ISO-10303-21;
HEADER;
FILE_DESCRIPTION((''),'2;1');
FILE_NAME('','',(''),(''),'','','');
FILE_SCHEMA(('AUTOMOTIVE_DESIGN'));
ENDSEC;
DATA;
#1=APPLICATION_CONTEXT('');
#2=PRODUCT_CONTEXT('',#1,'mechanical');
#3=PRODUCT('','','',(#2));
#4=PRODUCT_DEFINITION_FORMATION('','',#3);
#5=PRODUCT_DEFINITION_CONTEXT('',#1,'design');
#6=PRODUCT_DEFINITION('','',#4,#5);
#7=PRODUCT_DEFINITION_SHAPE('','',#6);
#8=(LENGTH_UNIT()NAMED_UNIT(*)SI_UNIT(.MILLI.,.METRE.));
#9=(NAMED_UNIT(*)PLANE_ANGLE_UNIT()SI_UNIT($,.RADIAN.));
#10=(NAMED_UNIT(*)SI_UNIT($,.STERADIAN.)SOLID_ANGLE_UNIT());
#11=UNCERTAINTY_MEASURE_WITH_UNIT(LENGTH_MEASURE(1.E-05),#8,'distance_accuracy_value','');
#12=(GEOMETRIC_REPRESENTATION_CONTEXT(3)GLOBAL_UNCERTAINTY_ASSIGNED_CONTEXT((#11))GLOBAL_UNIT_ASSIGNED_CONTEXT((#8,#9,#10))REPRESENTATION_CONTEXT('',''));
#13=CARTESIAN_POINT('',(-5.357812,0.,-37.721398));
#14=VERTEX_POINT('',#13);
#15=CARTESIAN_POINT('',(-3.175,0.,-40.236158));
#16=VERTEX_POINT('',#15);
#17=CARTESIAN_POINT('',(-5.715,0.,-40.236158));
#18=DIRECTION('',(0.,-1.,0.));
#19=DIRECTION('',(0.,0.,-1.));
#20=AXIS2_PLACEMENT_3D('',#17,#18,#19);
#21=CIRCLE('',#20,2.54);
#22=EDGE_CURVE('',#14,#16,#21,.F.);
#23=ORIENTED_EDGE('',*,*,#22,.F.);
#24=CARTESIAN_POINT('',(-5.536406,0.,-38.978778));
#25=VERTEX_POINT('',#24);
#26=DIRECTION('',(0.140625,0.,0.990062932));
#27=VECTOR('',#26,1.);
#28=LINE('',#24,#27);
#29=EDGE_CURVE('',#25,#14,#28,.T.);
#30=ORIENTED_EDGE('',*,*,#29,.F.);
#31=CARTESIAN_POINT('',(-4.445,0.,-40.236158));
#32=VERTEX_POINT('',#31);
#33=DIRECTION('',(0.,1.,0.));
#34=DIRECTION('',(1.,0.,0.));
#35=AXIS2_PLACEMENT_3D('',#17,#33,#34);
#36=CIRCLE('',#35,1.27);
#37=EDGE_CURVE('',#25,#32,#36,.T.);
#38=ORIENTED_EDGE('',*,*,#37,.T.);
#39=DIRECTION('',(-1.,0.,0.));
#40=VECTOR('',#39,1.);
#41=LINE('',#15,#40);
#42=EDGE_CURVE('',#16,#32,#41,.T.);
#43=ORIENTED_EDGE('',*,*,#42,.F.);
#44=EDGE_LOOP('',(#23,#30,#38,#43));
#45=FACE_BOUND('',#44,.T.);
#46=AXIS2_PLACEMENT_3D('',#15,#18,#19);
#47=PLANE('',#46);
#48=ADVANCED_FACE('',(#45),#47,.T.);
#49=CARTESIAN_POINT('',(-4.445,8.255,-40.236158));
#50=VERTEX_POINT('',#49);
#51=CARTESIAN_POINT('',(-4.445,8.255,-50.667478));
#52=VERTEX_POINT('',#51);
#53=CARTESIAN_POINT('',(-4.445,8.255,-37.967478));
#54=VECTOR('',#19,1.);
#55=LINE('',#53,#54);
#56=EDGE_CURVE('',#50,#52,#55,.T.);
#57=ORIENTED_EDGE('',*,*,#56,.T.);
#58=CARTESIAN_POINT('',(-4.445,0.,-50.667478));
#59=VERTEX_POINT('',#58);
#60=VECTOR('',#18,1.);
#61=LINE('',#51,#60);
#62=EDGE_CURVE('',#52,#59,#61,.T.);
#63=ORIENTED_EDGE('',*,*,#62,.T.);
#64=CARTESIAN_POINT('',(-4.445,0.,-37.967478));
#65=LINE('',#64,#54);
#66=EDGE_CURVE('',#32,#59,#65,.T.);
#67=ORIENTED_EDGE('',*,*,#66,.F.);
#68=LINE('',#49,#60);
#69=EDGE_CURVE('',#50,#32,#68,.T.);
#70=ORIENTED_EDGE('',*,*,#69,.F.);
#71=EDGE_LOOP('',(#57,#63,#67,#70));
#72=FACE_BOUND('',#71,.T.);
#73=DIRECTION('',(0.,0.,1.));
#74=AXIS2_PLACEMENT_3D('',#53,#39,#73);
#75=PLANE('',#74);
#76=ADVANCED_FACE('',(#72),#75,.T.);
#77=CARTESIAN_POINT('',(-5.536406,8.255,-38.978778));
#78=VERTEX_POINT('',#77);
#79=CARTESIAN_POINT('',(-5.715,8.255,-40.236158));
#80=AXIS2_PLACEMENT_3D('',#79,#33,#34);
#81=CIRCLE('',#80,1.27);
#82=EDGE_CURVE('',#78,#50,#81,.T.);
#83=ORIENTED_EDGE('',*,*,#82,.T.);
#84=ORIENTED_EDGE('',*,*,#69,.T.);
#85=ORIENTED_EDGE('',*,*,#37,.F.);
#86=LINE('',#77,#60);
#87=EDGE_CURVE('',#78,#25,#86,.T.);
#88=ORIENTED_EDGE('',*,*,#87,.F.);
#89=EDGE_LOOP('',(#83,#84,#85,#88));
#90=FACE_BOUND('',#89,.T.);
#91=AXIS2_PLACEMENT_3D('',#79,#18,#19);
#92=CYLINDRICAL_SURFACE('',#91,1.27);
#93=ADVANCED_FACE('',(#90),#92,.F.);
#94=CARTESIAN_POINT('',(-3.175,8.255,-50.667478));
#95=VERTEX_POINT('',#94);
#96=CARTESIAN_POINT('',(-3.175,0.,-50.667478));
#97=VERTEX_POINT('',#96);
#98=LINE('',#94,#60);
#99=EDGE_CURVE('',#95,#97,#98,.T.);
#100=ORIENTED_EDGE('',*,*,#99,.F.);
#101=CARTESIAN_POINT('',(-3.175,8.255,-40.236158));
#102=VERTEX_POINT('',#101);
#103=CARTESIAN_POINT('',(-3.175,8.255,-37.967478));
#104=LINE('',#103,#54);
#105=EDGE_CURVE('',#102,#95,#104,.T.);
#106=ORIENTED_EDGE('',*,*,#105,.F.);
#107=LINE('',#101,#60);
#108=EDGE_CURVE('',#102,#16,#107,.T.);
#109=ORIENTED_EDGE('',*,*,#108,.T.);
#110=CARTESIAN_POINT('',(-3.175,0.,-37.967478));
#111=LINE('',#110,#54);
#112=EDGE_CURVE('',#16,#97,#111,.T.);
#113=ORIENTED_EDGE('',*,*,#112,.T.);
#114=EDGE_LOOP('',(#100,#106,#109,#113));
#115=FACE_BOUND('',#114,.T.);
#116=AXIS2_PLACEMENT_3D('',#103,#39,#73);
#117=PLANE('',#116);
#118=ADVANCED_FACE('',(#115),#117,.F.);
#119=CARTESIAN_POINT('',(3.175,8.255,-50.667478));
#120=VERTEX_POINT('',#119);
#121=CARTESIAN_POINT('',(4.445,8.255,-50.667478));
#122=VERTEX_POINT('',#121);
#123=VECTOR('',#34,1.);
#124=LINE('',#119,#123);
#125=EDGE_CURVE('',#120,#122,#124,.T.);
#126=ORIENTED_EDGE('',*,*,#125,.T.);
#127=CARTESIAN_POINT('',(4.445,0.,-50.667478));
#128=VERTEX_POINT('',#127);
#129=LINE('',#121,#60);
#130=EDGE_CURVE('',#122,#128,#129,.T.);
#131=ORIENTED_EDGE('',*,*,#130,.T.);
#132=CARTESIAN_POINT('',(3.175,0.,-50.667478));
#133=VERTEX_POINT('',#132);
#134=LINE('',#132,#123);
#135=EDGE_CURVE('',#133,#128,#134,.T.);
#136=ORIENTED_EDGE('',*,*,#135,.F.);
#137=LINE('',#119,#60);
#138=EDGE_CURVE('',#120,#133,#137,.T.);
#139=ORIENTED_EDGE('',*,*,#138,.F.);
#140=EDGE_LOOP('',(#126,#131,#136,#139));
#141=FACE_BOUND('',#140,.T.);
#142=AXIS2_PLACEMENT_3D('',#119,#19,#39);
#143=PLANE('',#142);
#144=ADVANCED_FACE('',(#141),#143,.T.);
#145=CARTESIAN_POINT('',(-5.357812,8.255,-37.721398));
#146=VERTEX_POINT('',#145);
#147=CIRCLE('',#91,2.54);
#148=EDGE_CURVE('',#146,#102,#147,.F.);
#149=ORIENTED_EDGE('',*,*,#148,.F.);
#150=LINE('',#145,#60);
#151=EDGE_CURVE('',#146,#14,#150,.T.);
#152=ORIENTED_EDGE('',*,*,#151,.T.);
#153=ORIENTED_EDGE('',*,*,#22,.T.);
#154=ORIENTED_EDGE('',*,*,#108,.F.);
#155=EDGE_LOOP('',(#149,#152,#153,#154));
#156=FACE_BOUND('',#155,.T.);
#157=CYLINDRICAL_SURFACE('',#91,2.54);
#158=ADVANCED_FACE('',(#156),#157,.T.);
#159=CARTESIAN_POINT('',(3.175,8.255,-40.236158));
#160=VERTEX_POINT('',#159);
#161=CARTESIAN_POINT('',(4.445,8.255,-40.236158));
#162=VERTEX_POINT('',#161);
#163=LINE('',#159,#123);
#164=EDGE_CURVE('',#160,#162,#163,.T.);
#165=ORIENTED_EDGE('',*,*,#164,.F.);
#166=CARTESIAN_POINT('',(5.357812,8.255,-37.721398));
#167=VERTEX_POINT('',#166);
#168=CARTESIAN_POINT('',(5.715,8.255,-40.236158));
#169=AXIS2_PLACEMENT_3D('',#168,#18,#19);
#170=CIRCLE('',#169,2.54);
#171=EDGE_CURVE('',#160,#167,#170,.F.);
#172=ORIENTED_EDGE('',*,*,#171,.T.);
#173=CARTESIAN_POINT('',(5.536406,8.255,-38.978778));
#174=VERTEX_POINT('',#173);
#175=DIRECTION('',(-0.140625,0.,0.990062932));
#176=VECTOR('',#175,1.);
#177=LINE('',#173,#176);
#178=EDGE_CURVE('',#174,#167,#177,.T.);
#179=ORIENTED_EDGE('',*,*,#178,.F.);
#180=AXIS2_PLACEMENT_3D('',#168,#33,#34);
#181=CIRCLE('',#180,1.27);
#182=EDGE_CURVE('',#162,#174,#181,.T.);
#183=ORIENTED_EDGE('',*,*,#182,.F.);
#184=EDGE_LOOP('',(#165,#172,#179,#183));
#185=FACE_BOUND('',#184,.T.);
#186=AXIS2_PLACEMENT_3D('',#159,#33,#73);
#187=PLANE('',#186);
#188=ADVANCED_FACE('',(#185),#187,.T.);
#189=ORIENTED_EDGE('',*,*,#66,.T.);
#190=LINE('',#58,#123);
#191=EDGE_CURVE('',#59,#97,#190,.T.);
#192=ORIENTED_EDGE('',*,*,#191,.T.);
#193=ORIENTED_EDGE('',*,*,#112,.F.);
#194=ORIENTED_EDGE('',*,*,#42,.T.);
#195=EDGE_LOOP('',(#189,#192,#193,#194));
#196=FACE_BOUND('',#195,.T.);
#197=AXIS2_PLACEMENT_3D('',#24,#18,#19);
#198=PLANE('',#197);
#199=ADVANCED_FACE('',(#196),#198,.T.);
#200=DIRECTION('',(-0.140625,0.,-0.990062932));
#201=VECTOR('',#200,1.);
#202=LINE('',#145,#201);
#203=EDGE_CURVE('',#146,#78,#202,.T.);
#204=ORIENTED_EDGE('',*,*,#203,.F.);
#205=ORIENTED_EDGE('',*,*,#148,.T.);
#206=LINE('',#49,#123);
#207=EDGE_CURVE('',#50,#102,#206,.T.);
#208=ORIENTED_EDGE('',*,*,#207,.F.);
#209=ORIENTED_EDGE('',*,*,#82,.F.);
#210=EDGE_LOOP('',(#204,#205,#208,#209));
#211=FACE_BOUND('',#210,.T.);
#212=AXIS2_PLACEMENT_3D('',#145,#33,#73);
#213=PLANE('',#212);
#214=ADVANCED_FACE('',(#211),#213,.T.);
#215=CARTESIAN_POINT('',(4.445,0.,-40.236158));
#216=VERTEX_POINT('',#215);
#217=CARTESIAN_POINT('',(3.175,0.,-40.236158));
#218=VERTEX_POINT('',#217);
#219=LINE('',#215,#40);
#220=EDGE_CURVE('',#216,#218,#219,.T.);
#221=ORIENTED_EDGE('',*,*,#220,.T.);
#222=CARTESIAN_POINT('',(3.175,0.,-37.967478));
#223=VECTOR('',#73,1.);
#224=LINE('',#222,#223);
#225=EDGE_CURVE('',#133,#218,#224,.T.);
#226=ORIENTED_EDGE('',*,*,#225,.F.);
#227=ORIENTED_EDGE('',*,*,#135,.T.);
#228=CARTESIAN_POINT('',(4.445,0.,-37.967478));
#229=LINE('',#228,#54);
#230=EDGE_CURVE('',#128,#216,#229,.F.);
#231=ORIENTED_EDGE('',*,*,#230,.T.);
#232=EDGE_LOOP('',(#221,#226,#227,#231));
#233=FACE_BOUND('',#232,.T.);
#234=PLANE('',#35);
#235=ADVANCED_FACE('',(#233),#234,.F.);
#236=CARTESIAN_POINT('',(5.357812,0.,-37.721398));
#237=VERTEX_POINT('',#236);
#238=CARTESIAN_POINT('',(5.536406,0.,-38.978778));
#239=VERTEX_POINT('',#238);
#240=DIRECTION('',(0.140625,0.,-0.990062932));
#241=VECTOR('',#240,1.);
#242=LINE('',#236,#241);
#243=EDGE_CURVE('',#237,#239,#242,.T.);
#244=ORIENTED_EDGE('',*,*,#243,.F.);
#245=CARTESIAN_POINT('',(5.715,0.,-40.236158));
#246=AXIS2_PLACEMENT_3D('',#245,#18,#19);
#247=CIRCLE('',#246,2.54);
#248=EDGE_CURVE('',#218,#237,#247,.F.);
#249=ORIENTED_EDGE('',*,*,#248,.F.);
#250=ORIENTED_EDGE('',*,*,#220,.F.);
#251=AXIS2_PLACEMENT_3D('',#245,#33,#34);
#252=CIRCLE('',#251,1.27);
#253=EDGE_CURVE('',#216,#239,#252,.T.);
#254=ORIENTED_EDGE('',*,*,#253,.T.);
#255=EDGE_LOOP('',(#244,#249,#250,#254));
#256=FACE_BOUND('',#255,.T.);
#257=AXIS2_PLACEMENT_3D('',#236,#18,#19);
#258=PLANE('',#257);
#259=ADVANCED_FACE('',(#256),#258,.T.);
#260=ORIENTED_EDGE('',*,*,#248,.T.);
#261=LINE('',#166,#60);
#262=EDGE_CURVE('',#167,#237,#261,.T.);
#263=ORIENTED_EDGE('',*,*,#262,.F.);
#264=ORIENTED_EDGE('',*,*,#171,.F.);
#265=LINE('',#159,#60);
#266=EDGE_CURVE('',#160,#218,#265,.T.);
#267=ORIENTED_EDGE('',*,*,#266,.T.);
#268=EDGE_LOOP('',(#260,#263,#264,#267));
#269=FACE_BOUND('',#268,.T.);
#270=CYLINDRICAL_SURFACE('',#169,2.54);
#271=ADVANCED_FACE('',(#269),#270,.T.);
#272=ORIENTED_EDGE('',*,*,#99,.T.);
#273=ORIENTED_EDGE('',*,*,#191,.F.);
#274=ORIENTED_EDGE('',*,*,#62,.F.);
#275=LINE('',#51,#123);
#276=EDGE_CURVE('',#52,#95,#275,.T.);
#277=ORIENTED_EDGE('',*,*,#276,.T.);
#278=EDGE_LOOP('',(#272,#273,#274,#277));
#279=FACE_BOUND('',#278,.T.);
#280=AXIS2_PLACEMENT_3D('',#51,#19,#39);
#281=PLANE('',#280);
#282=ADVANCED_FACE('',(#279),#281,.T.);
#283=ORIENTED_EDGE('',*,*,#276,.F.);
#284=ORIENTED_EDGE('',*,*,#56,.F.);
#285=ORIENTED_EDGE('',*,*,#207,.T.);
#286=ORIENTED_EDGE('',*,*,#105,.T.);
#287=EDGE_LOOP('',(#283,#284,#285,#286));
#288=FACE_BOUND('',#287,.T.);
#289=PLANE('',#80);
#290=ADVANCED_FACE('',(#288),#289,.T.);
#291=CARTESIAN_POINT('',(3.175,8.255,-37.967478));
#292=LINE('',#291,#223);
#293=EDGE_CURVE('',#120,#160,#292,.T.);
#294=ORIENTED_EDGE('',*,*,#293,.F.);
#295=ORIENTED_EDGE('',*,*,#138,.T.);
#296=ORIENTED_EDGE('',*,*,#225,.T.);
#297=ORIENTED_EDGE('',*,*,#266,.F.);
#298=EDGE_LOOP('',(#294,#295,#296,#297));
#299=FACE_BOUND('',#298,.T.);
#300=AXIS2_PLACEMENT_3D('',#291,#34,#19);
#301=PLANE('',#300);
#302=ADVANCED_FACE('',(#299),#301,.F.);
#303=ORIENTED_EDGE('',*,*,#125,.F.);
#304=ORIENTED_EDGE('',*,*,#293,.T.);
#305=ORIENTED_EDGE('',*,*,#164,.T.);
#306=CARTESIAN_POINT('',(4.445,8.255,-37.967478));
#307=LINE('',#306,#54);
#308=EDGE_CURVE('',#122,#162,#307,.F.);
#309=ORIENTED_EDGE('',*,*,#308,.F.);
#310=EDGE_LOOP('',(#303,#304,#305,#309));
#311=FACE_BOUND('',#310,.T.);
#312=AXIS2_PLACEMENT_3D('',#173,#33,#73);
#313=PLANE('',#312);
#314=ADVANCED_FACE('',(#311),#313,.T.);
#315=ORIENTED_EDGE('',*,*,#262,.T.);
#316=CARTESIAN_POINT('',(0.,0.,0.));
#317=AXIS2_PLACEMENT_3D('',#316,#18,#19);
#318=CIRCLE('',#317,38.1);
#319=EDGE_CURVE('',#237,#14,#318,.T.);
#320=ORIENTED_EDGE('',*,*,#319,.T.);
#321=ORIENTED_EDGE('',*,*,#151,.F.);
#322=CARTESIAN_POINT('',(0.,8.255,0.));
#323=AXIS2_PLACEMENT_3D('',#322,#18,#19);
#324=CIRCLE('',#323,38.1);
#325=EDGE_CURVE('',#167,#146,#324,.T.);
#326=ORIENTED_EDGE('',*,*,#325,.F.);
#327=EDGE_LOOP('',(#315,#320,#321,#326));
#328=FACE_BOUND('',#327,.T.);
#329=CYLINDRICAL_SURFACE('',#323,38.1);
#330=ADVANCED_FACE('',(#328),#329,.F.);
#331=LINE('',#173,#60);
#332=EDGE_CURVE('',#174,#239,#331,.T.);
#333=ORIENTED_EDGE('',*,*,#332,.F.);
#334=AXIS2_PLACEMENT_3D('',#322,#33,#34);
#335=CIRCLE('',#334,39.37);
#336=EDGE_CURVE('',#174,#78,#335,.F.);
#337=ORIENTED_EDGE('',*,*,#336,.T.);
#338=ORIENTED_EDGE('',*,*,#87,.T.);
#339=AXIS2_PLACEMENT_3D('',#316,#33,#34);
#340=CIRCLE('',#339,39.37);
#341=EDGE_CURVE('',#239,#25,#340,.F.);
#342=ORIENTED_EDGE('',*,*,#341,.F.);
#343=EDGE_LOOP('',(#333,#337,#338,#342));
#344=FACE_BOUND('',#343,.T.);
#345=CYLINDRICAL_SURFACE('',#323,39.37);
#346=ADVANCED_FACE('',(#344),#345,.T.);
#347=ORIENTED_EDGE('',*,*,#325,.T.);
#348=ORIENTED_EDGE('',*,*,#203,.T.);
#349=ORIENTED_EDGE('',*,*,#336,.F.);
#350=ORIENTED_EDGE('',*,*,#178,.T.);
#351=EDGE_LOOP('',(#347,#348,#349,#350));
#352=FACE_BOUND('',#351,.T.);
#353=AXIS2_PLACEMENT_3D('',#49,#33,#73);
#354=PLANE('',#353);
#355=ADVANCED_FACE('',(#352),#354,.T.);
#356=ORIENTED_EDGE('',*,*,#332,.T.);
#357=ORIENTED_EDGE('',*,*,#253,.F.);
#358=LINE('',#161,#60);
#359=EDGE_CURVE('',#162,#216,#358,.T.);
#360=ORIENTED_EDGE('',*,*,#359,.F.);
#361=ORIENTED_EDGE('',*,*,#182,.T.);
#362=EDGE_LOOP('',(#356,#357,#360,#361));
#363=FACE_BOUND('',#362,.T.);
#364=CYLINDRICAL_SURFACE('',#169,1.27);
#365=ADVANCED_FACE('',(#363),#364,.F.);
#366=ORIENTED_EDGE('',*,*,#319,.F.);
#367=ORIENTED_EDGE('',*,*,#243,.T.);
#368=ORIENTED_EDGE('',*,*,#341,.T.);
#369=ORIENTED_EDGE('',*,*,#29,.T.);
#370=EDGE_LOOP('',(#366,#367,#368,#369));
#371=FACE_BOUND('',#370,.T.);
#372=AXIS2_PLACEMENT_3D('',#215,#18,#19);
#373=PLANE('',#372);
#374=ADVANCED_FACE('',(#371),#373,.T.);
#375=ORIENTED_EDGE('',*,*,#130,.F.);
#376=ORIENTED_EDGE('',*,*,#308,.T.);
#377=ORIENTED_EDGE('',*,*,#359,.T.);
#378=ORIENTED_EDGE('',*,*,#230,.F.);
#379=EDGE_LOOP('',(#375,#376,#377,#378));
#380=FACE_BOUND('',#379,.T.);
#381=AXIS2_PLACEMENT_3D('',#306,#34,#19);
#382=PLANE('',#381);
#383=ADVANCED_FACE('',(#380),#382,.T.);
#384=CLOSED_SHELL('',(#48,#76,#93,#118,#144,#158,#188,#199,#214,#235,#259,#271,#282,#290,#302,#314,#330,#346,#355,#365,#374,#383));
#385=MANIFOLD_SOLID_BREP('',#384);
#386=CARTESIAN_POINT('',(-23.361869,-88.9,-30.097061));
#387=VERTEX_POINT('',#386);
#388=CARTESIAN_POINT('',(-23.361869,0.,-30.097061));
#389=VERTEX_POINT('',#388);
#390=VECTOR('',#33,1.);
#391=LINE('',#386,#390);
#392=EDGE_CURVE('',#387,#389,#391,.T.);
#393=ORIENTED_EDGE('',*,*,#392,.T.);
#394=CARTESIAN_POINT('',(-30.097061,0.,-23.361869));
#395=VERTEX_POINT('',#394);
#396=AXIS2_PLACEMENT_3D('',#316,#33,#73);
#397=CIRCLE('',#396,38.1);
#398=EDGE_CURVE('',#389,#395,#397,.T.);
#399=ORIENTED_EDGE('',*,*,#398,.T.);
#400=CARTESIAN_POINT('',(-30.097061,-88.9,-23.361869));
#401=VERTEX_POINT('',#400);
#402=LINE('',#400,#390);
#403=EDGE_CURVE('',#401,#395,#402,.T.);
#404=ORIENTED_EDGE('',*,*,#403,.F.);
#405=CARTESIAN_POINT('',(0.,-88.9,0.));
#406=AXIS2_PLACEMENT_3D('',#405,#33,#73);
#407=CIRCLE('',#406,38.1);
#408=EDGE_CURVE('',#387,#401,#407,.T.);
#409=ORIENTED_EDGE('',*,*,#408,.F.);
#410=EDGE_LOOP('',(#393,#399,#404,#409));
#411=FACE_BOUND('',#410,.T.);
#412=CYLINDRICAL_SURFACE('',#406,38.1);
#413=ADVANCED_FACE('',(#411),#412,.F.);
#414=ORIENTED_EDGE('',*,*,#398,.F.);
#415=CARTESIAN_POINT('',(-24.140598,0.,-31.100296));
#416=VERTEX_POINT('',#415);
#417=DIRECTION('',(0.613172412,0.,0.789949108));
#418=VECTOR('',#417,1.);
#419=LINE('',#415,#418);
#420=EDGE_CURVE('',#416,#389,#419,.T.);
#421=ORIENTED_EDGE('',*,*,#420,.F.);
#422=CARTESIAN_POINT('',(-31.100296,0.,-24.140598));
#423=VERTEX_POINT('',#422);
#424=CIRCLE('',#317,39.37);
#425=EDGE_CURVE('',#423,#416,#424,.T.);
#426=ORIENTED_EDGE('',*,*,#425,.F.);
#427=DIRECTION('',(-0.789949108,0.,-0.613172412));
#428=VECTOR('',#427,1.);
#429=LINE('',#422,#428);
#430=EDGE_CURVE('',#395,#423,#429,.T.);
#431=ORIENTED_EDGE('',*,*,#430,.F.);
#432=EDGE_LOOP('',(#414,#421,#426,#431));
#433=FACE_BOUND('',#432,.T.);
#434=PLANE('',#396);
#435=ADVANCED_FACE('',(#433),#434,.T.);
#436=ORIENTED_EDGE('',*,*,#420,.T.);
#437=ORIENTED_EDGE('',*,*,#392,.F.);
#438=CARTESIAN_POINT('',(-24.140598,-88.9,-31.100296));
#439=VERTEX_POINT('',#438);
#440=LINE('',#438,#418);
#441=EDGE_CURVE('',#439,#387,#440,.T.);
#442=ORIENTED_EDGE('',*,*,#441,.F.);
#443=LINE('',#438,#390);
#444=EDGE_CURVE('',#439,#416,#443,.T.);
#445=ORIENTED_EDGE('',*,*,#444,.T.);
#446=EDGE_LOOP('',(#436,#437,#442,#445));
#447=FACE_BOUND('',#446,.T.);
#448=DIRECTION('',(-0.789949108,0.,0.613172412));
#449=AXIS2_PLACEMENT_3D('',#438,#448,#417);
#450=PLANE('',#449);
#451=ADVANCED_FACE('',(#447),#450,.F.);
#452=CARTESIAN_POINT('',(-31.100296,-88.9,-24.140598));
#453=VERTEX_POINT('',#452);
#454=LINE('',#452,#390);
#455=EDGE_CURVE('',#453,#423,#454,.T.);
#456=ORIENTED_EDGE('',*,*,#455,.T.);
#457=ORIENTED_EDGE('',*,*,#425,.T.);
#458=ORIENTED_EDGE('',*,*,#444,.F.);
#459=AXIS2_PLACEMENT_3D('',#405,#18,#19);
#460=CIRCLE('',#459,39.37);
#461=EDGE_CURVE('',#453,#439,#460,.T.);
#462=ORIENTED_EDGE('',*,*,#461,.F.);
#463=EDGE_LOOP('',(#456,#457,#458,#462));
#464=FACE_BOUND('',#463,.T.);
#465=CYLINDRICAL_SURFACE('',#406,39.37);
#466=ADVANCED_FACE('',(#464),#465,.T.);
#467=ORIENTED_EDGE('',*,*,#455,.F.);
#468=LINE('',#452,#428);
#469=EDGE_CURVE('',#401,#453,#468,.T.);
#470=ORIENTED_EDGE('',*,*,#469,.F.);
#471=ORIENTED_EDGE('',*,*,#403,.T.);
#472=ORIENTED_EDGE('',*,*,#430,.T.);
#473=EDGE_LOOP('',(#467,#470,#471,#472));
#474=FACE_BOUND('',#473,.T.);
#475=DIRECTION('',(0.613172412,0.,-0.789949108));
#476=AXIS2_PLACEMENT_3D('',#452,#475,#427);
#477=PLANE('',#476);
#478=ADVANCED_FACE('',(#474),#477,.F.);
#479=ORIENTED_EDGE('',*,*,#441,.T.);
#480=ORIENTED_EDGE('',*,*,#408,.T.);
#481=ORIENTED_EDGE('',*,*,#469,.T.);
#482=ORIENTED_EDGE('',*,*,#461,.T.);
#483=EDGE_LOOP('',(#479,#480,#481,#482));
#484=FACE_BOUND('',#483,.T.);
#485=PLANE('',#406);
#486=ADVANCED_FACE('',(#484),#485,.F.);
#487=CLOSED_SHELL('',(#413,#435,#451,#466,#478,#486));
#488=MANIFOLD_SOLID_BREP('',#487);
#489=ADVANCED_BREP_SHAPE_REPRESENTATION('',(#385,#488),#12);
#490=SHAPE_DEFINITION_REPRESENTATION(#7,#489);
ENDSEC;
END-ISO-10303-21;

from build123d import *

# Parameters (mm, degrees)
BASE_FLANGE1_DEPTH = 8.255
BASE_FLANGE3_START = 88.9
BASE_FLANGE3_DEPTH = 88.9


# Read off the part's stored shape, not the designer's step: Base-Flange1
# Sheet-metal steps are written as plain solids
with BuildPart() as part:
    # Base-Flange1 outline → Base-Flange1 (new body)
    with BuildSketch(Plane(origin=(0, 0, 0), x_dir=(1, 0, 0), z_dir=(0, 1, 0))):
        with BuildLine():
            Line((-3.175, 40.236157558), (-3.175, 50.667477859))
            Line((-3.175, 50.667477859), (-4.445, 50.667477859))
            Line((-4.445, 50.667477859), (-4.445, 40.236157558))
            ThreePointArc((-4.445, 40.236157558), (-4.755908226, 39.403665534), (-5.53640625, 38.978777634))
            ThreePointArc((-5.53640625, 38.978777634), (0, -39.37), (5.53640625, 38.978777634))
            ThreePointArc((5.53640625, 38.978777634), (4.755908226, 39.403665534), (4.445, 40.236157558))
            Line((4.445, 40.236157558), (4.445, 50.667477859))
            Line((4.445, 50.667477859), (3.175, 50.667477859))
            Line((3.175, 50.667477859), (3.175, 40.236157558))
            ThreePointArc((3.175, 40.236157558), (3.796816452, 38.571173511), (5.3578125, 37.72139771))
            ThreePointArc((5.3578125, 37.72139771), (0, -38.1), (-5.3578125, 37.72139771))
            ThreePointArc((-5.3578125, 37.72139771), (-3.796816452, 38.571173511), (-3.175, 40.236157558))
        make_face()
    extrude(amount=BASE_FLANGE1_DEPTH)


with BuildPart() as body_2:
    # Sketch14 → Base-Flange3 (new body)
    with BuildSketch(Plane.XZ.offset(BASE_FLANGE3_START)):
        with BuildLine():
            Line((-24.140597875, -31.100296369), (-23.361868911, -30.097061002))
            ThreePointArc((-23.361868911, -30.097061002), (-26.940768363, -26.940768363), (-30.097061002, -23.361868911))
            Line((-30.097061002, -23.361868911), (-31.100296369, -24.140597875))
            ThreePointArc((-31.100296369, -24.140597875), (-27.838793975, -27.838793975), (-24.140597875, -31.100296369))
        make_face()
    extrude(amount=-BASE_FLANGE3_DEPTH)


solid = Compound([part.part, body_2.part])
